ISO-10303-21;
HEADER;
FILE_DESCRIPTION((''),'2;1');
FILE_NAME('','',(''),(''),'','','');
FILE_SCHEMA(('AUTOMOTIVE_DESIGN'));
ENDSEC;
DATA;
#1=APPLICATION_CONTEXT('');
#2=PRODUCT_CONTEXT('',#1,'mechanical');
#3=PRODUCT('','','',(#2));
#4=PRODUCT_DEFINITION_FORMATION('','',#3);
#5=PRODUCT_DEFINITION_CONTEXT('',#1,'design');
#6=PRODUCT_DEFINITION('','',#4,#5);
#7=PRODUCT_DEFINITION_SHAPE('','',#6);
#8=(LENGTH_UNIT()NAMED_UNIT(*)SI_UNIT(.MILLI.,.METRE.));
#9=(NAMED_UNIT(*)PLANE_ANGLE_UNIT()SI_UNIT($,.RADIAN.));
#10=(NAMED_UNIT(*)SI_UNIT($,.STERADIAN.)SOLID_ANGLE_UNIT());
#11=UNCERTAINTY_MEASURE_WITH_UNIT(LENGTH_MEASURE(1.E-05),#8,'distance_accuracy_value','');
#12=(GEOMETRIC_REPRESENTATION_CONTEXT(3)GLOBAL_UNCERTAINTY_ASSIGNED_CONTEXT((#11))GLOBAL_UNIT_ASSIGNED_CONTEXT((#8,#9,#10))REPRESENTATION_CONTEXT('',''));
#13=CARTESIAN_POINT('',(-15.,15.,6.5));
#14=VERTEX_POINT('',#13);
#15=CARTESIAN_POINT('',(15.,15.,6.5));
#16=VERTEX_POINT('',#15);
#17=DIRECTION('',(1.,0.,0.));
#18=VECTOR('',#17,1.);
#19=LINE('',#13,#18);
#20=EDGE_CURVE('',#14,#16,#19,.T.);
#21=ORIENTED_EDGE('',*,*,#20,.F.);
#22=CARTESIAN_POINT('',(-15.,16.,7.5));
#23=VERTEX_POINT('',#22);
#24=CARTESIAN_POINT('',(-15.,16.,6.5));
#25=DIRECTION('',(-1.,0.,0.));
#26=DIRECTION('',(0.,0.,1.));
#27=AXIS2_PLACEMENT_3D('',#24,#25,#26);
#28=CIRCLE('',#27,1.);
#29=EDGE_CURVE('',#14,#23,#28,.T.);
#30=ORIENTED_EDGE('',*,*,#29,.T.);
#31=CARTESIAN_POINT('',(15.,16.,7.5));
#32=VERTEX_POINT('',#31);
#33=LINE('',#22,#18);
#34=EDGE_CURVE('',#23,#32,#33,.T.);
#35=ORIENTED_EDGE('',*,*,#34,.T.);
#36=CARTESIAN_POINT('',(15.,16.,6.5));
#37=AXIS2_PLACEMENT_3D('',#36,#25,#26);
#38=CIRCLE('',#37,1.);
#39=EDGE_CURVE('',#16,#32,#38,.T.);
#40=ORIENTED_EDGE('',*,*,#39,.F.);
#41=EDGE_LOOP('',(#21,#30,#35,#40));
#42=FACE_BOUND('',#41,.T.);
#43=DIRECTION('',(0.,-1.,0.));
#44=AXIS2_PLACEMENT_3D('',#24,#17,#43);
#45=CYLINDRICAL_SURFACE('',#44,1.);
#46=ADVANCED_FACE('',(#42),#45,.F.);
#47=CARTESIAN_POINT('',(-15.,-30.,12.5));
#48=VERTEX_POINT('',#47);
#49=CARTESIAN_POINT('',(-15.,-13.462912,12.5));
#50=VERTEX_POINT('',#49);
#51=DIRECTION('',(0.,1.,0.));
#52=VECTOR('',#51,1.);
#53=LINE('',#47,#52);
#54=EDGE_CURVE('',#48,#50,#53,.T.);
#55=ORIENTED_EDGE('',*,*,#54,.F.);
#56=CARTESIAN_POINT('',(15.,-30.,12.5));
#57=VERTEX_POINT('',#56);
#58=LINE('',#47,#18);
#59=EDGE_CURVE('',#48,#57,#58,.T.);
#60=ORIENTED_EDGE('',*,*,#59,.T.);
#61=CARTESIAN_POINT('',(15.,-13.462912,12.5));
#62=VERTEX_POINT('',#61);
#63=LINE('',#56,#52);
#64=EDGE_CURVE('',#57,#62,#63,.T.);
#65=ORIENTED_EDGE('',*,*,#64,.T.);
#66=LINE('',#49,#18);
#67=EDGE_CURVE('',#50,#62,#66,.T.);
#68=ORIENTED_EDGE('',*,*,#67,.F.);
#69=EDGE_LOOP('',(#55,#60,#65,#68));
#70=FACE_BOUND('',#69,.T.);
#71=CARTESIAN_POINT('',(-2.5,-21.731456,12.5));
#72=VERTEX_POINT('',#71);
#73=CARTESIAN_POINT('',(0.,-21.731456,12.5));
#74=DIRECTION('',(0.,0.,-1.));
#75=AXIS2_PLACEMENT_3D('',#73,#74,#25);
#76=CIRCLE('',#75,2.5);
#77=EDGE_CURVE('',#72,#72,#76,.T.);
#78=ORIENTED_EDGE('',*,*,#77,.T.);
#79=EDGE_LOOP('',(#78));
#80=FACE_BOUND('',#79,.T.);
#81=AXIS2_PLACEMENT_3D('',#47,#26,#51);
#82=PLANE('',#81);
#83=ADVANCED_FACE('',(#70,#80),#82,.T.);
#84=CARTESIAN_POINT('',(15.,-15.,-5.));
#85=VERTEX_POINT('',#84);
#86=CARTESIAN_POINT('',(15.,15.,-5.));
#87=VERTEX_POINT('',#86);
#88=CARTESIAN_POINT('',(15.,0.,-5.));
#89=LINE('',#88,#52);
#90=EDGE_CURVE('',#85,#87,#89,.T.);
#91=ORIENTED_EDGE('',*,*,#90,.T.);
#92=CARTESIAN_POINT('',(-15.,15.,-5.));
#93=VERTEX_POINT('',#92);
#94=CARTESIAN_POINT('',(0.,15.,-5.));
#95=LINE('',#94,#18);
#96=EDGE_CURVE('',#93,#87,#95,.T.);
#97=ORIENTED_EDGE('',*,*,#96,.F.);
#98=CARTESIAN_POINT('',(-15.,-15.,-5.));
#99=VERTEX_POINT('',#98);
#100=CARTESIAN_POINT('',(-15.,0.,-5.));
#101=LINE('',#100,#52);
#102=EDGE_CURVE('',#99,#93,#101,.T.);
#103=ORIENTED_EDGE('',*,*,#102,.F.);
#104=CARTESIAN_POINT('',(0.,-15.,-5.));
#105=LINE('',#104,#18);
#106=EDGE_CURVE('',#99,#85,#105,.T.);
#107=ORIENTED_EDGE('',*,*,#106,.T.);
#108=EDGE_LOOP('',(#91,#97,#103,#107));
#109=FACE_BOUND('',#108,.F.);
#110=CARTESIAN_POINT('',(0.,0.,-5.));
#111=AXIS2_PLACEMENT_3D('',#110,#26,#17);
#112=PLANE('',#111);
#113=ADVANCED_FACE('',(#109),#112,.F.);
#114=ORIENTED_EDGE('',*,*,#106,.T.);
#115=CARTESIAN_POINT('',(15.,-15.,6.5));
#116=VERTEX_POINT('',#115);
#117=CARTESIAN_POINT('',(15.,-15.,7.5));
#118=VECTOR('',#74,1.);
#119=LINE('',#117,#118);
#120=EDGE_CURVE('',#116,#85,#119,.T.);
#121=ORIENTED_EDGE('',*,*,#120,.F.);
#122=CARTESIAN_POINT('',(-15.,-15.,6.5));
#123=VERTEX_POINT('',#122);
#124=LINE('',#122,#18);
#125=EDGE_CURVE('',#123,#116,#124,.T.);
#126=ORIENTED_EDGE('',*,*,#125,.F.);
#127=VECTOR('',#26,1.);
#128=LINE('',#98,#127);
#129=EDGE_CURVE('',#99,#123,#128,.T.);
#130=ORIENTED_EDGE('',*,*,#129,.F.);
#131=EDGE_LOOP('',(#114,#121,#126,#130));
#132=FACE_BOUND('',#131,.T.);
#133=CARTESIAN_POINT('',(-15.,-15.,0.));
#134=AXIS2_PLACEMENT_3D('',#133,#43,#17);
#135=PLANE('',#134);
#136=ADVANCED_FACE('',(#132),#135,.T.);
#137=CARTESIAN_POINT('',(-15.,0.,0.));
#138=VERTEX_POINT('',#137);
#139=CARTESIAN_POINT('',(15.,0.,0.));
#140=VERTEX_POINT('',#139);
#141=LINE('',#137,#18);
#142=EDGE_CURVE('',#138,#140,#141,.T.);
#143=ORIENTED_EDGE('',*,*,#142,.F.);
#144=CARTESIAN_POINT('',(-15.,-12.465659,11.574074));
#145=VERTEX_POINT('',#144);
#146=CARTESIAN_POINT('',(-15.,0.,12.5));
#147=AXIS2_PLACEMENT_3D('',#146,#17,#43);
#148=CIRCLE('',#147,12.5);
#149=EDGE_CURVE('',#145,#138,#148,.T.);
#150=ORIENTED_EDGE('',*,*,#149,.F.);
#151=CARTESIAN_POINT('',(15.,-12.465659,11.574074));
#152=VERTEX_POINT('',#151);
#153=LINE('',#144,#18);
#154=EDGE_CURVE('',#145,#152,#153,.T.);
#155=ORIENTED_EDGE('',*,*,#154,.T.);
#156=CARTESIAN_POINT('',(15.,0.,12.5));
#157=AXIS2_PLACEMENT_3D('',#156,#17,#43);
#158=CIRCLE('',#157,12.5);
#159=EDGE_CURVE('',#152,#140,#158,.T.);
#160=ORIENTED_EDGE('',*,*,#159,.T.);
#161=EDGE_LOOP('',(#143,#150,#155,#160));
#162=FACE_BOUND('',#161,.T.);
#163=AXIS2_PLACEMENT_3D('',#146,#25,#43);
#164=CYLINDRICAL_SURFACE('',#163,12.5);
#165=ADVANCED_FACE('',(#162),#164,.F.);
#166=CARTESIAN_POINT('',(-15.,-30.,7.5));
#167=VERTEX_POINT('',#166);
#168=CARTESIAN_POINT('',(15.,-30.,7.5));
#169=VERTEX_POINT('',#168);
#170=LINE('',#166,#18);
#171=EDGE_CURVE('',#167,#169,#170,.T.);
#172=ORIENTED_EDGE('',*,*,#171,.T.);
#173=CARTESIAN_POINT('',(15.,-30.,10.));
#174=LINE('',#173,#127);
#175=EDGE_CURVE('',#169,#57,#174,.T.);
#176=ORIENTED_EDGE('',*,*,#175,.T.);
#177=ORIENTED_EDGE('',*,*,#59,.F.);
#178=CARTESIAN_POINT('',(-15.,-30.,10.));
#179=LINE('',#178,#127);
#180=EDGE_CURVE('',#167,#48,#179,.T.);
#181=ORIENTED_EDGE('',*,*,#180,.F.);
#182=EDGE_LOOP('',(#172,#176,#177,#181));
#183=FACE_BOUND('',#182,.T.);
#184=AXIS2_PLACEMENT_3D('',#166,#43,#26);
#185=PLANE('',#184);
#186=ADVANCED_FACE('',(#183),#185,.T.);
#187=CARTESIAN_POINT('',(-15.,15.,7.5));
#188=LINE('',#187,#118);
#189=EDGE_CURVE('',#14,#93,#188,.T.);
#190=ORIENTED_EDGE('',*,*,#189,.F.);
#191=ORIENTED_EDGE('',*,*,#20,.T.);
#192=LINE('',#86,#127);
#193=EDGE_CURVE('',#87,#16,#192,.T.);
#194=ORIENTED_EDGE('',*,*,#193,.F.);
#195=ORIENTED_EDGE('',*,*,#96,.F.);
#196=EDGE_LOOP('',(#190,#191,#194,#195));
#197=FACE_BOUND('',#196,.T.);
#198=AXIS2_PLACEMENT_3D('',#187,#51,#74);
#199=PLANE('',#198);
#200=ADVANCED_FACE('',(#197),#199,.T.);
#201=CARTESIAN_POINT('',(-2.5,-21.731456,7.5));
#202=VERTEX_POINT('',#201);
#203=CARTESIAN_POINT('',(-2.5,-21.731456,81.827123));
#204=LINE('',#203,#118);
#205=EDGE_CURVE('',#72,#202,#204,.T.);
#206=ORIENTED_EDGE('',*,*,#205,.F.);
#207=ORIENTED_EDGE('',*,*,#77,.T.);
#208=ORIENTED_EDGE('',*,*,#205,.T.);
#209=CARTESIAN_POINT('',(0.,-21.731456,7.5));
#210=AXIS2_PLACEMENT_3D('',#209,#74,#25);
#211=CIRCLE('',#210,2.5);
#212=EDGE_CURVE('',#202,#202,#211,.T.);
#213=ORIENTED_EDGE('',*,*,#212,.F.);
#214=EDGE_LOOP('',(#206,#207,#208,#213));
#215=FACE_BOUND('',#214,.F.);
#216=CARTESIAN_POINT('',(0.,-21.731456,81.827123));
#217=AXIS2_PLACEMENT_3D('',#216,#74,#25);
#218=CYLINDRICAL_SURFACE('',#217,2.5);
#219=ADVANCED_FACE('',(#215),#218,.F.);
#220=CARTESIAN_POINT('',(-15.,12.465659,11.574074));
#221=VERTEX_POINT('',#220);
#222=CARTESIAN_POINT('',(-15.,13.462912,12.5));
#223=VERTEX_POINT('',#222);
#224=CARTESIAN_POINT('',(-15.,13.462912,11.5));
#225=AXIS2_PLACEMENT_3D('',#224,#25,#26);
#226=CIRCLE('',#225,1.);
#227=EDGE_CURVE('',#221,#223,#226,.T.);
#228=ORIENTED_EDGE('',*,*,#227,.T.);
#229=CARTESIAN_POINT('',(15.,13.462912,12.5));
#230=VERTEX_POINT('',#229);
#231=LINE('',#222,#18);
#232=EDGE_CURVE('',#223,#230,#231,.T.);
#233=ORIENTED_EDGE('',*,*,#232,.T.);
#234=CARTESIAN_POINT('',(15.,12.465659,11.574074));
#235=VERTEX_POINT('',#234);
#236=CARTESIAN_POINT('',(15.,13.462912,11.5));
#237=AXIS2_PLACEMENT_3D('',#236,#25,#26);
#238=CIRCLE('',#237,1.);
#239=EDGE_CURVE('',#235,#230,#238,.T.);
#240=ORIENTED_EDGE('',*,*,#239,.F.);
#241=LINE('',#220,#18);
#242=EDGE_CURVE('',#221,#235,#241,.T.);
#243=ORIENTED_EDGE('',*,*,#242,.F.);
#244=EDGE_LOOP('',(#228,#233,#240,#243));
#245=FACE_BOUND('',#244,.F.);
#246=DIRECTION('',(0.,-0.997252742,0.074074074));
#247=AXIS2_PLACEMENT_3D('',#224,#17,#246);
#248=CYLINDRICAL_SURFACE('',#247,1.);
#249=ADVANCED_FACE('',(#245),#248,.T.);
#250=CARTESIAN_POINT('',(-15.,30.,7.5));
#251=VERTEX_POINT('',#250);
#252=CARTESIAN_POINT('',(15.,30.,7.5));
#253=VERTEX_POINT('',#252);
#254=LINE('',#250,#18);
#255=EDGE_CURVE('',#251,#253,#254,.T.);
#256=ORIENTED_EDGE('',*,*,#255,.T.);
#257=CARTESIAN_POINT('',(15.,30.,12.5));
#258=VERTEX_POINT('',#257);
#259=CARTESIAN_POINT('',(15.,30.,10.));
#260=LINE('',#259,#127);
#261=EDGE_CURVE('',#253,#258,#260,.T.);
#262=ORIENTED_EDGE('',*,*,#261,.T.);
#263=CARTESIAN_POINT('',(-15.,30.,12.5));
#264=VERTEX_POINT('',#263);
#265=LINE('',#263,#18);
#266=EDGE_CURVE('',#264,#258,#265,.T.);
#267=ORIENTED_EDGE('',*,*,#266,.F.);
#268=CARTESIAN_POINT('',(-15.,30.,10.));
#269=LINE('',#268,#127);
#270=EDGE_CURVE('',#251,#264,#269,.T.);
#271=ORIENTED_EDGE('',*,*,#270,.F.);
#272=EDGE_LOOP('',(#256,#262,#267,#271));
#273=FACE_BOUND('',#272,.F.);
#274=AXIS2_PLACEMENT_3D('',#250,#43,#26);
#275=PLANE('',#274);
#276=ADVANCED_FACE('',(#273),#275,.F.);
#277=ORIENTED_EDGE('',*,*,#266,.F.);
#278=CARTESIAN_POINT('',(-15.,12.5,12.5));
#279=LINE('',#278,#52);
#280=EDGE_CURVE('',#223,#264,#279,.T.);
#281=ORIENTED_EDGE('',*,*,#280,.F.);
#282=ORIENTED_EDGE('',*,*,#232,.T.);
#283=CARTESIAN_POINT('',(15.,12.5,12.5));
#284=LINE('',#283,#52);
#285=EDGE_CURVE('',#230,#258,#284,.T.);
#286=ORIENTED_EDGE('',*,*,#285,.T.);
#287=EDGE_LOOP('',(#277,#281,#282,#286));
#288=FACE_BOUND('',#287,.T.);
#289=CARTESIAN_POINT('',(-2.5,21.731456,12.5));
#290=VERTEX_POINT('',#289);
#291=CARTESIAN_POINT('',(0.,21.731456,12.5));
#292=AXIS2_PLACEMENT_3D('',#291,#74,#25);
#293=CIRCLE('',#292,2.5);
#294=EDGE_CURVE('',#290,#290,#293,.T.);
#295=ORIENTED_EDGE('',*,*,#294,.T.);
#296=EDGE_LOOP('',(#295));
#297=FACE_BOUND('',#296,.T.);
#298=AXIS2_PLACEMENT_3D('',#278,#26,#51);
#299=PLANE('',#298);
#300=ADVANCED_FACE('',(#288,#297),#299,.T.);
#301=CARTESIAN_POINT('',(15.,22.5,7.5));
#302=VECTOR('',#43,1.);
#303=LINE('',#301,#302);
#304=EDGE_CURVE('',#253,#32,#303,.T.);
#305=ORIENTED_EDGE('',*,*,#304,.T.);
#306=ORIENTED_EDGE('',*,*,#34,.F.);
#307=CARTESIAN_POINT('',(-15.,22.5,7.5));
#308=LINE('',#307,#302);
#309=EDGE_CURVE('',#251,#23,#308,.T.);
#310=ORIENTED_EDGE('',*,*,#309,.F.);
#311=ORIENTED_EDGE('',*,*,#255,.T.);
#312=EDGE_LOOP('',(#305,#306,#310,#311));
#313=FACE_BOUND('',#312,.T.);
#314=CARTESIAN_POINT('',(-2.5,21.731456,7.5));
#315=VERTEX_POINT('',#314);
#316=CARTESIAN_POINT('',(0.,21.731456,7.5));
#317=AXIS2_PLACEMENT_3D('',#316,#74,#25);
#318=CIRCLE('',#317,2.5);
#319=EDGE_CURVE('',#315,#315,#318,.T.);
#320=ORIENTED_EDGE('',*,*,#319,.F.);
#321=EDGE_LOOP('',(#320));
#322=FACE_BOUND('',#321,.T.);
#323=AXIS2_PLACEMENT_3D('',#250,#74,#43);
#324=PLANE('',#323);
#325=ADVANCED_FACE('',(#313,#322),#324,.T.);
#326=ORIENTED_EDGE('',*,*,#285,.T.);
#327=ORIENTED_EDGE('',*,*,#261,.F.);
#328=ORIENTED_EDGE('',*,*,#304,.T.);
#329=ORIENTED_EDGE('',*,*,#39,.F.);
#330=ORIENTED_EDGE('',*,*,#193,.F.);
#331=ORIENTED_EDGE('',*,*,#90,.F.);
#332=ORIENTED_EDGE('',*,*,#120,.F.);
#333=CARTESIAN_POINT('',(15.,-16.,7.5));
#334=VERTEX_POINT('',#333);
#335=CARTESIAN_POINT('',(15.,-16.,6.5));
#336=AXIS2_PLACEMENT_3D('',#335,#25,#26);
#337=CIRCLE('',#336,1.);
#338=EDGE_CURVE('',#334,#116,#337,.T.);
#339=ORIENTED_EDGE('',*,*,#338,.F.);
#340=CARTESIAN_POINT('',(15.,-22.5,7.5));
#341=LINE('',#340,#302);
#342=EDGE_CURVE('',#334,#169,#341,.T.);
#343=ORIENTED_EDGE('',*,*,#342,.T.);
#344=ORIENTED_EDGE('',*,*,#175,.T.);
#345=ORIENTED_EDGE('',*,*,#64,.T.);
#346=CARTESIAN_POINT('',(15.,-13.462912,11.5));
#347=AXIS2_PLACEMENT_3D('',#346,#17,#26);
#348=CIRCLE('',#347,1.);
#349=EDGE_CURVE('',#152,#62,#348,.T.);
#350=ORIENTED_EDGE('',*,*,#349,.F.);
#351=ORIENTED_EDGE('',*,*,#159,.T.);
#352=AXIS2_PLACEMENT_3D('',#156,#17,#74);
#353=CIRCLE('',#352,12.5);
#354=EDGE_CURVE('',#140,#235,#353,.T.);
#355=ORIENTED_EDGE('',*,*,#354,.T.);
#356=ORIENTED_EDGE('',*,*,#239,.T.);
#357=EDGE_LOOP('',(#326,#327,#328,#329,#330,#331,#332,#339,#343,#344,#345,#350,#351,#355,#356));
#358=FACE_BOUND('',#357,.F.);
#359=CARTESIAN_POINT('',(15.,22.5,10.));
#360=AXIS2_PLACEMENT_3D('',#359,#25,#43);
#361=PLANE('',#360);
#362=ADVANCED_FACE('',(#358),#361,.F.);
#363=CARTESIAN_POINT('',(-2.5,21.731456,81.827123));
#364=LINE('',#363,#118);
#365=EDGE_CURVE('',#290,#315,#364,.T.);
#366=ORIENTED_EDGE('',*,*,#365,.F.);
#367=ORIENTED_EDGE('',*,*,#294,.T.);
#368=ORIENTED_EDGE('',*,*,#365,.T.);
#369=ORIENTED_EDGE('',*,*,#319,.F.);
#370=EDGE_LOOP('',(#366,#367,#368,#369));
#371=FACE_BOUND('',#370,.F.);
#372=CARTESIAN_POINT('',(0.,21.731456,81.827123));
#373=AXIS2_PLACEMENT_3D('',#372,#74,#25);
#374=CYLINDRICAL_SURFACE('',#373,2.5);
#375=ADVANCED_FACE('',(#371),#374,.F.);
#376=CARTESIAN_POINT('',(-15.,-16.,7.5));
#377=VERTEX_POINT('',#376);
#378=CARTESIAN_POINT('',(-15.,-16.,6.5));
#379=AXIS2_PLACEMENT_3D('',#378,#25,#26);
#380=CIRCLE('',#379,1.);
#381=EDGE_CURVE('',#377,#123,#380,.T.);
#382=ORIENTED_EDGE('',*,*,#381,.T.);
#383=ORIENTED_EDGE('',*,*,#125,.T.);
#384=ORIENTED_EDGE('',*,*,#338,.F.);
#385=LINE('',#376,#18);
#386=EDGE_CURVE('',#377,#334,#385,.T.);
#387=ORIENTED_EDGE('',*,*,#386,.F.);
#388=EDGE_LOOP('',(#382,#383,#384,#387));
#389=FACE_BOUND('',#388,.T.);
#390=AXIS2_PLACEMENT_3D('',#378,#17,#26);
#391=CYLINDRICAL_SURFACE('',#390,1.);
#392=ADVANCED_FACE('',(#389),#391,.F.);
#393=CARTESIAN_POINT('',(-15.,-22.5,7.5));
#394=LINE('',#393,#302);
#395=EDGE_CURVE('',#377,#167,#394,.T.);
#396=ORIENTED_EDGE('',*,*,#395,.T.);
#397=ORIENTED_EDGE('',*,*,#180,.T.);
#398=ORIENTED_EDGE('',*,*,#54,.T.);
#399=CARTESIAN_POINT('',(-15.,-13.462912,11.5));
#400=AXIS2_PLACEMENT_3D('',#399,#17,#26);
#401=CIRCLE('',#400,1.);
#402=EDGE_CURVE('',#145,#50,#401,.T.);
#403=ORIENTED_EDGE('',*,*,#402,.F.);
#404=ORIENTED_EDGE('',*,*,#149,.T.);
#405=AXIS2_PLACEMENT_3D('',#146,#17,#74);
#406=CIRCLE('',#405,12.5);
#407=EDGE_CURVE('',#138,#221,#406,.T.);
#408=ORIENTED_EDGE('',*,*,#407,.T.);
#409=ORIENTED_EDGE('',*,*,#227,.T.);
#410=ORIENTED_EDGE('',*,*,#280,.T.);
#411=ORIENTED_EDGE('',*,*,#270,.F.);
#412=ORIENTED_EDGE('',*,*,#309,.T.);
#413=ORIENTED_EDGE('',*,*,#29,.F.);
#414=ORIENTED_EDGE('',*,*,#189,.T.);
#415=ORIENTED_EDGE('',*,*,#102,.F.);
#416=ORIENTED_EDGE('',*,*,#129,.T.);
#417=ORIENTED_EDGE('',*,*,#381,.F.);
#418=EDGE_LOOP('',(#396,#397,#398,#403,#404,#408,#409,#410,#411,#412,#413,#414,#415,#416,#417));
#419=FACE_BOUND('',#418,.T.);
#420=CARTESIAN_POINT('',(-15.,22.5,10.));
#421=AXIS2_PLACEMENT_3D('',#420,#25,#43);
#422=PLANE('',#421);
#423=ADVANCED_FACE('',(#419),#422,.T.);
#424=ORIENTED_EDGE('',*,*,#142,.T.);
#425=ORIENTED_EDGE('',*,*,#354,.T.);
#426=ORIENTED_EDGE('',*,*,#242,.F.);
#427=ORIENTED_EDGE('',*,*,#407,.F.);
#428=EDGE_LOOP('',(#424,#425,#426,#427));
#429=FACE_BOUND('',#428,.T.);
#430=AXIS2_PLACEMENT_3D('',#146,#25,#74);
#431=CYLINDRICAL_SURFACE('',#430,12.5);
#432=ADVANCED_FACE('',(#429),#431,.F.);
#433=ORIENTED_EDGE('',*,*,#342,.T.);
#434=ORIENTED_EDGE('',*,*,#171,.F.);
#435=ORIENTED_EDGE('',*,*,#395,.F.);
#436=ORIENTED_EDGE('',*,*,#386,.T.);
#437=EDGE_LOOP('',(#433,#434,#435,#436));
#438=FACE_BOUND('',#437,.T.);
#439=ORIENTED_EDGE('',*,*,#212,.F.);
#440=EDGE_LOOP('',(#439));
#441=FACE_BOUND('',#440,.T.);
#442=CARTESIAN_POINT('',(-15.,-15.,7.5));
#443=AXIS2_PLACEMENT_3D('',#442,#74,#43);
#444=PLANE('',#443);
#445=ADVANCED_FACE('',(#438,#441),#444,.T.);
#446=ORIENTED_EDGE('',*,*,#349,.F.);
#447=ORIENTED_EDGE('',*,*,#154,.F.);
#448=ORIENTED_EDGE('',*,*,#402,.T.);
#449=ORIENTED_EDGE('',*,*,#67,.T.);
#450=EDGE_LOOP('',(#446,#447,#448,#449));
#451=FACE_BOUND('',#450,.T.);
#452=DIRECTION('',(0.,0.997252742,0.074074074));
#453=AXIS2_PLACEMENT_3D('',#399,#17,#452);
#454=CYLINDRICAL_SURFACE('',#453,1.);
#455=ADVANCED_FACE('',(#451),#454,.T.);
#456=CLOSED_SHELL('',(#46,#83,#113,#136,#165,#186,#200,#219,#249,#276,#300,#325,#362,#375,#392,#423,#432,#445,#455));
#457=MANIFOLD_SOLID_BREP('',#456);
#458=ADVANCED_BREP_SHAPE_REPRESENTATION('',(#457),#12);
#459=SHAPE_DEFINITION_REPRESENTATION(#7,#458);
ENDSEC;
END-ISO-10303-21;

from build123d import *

# Parameters (mm, degrees)
F0_W     = 30
F0_H     = 30
F1_DEPTH = 5
F2_W     = 15
F2_H     = 5
F3_DEPTH = 30
F4_R     = 1
F6_D     = 5


with BuildPart() as f1:
    # F0 (on Top) → F1 (new body)
    with BuildSketch(Plane.XY):
        Rectangle(F0_W, F0_H)
    extrude(amount=-F1_DEPTH)

    # F2 (on face) → F3 (join)
    with BuildSketch(Plane(origin=(-15, 0, 0), x_dir=(0, -1, 0), z_dir=(-1, 0, 0))):
        with Locations((-22.5, 10)):
            Rectangle(F2_W, F2_H)
        with BuildLine():
            ThreePointArc((0, 0), (-8.8388347648, 3.6611652352), (-12.5, 12.5))
            Line((-12.5, 12.5), (-15, 12.5))
            Line((-15, 12.5), (-15, 7.5))
            Line((-15, 7.5), (-15, 0))
            Line((-15, 0), (0, 0))
        make_face()
        with BuildLine():
            ThreePointArc((12.5, 12.5), (8.8388347648, 3.6611652352), (0, 0))
            Line((0, 0), (15, 0))
            Line((15, 0), (15, 7.5))
            Line((15, 7.5), (15, 12.5))
            Line((15, 12.5), (12.5, 12.5))
        make_face()
        with Locations((22.5, 10)):
            Rectangle(F2_W, F2_H)
    extrude(amount=-F3_DEPTH)

    # F4
    f4_edges = [f1.edges().sort_by_distance(p)[0] for p in [
        (0, 12.5, 12.5),
        (0, -15, 7.5),
        (0, 15, 7.5),
        (0, -12.5, 12.5),
    ]]
    fillet(f4_edges, radius=F4_R)

    # F6 (through all)
    with Locations(Plane.XY.offset(12.5)):
        with Locations((0, 21.7314560089), (0, -21.7314560089)):
            Hole(F6_D / 2)


solid = f1.part
